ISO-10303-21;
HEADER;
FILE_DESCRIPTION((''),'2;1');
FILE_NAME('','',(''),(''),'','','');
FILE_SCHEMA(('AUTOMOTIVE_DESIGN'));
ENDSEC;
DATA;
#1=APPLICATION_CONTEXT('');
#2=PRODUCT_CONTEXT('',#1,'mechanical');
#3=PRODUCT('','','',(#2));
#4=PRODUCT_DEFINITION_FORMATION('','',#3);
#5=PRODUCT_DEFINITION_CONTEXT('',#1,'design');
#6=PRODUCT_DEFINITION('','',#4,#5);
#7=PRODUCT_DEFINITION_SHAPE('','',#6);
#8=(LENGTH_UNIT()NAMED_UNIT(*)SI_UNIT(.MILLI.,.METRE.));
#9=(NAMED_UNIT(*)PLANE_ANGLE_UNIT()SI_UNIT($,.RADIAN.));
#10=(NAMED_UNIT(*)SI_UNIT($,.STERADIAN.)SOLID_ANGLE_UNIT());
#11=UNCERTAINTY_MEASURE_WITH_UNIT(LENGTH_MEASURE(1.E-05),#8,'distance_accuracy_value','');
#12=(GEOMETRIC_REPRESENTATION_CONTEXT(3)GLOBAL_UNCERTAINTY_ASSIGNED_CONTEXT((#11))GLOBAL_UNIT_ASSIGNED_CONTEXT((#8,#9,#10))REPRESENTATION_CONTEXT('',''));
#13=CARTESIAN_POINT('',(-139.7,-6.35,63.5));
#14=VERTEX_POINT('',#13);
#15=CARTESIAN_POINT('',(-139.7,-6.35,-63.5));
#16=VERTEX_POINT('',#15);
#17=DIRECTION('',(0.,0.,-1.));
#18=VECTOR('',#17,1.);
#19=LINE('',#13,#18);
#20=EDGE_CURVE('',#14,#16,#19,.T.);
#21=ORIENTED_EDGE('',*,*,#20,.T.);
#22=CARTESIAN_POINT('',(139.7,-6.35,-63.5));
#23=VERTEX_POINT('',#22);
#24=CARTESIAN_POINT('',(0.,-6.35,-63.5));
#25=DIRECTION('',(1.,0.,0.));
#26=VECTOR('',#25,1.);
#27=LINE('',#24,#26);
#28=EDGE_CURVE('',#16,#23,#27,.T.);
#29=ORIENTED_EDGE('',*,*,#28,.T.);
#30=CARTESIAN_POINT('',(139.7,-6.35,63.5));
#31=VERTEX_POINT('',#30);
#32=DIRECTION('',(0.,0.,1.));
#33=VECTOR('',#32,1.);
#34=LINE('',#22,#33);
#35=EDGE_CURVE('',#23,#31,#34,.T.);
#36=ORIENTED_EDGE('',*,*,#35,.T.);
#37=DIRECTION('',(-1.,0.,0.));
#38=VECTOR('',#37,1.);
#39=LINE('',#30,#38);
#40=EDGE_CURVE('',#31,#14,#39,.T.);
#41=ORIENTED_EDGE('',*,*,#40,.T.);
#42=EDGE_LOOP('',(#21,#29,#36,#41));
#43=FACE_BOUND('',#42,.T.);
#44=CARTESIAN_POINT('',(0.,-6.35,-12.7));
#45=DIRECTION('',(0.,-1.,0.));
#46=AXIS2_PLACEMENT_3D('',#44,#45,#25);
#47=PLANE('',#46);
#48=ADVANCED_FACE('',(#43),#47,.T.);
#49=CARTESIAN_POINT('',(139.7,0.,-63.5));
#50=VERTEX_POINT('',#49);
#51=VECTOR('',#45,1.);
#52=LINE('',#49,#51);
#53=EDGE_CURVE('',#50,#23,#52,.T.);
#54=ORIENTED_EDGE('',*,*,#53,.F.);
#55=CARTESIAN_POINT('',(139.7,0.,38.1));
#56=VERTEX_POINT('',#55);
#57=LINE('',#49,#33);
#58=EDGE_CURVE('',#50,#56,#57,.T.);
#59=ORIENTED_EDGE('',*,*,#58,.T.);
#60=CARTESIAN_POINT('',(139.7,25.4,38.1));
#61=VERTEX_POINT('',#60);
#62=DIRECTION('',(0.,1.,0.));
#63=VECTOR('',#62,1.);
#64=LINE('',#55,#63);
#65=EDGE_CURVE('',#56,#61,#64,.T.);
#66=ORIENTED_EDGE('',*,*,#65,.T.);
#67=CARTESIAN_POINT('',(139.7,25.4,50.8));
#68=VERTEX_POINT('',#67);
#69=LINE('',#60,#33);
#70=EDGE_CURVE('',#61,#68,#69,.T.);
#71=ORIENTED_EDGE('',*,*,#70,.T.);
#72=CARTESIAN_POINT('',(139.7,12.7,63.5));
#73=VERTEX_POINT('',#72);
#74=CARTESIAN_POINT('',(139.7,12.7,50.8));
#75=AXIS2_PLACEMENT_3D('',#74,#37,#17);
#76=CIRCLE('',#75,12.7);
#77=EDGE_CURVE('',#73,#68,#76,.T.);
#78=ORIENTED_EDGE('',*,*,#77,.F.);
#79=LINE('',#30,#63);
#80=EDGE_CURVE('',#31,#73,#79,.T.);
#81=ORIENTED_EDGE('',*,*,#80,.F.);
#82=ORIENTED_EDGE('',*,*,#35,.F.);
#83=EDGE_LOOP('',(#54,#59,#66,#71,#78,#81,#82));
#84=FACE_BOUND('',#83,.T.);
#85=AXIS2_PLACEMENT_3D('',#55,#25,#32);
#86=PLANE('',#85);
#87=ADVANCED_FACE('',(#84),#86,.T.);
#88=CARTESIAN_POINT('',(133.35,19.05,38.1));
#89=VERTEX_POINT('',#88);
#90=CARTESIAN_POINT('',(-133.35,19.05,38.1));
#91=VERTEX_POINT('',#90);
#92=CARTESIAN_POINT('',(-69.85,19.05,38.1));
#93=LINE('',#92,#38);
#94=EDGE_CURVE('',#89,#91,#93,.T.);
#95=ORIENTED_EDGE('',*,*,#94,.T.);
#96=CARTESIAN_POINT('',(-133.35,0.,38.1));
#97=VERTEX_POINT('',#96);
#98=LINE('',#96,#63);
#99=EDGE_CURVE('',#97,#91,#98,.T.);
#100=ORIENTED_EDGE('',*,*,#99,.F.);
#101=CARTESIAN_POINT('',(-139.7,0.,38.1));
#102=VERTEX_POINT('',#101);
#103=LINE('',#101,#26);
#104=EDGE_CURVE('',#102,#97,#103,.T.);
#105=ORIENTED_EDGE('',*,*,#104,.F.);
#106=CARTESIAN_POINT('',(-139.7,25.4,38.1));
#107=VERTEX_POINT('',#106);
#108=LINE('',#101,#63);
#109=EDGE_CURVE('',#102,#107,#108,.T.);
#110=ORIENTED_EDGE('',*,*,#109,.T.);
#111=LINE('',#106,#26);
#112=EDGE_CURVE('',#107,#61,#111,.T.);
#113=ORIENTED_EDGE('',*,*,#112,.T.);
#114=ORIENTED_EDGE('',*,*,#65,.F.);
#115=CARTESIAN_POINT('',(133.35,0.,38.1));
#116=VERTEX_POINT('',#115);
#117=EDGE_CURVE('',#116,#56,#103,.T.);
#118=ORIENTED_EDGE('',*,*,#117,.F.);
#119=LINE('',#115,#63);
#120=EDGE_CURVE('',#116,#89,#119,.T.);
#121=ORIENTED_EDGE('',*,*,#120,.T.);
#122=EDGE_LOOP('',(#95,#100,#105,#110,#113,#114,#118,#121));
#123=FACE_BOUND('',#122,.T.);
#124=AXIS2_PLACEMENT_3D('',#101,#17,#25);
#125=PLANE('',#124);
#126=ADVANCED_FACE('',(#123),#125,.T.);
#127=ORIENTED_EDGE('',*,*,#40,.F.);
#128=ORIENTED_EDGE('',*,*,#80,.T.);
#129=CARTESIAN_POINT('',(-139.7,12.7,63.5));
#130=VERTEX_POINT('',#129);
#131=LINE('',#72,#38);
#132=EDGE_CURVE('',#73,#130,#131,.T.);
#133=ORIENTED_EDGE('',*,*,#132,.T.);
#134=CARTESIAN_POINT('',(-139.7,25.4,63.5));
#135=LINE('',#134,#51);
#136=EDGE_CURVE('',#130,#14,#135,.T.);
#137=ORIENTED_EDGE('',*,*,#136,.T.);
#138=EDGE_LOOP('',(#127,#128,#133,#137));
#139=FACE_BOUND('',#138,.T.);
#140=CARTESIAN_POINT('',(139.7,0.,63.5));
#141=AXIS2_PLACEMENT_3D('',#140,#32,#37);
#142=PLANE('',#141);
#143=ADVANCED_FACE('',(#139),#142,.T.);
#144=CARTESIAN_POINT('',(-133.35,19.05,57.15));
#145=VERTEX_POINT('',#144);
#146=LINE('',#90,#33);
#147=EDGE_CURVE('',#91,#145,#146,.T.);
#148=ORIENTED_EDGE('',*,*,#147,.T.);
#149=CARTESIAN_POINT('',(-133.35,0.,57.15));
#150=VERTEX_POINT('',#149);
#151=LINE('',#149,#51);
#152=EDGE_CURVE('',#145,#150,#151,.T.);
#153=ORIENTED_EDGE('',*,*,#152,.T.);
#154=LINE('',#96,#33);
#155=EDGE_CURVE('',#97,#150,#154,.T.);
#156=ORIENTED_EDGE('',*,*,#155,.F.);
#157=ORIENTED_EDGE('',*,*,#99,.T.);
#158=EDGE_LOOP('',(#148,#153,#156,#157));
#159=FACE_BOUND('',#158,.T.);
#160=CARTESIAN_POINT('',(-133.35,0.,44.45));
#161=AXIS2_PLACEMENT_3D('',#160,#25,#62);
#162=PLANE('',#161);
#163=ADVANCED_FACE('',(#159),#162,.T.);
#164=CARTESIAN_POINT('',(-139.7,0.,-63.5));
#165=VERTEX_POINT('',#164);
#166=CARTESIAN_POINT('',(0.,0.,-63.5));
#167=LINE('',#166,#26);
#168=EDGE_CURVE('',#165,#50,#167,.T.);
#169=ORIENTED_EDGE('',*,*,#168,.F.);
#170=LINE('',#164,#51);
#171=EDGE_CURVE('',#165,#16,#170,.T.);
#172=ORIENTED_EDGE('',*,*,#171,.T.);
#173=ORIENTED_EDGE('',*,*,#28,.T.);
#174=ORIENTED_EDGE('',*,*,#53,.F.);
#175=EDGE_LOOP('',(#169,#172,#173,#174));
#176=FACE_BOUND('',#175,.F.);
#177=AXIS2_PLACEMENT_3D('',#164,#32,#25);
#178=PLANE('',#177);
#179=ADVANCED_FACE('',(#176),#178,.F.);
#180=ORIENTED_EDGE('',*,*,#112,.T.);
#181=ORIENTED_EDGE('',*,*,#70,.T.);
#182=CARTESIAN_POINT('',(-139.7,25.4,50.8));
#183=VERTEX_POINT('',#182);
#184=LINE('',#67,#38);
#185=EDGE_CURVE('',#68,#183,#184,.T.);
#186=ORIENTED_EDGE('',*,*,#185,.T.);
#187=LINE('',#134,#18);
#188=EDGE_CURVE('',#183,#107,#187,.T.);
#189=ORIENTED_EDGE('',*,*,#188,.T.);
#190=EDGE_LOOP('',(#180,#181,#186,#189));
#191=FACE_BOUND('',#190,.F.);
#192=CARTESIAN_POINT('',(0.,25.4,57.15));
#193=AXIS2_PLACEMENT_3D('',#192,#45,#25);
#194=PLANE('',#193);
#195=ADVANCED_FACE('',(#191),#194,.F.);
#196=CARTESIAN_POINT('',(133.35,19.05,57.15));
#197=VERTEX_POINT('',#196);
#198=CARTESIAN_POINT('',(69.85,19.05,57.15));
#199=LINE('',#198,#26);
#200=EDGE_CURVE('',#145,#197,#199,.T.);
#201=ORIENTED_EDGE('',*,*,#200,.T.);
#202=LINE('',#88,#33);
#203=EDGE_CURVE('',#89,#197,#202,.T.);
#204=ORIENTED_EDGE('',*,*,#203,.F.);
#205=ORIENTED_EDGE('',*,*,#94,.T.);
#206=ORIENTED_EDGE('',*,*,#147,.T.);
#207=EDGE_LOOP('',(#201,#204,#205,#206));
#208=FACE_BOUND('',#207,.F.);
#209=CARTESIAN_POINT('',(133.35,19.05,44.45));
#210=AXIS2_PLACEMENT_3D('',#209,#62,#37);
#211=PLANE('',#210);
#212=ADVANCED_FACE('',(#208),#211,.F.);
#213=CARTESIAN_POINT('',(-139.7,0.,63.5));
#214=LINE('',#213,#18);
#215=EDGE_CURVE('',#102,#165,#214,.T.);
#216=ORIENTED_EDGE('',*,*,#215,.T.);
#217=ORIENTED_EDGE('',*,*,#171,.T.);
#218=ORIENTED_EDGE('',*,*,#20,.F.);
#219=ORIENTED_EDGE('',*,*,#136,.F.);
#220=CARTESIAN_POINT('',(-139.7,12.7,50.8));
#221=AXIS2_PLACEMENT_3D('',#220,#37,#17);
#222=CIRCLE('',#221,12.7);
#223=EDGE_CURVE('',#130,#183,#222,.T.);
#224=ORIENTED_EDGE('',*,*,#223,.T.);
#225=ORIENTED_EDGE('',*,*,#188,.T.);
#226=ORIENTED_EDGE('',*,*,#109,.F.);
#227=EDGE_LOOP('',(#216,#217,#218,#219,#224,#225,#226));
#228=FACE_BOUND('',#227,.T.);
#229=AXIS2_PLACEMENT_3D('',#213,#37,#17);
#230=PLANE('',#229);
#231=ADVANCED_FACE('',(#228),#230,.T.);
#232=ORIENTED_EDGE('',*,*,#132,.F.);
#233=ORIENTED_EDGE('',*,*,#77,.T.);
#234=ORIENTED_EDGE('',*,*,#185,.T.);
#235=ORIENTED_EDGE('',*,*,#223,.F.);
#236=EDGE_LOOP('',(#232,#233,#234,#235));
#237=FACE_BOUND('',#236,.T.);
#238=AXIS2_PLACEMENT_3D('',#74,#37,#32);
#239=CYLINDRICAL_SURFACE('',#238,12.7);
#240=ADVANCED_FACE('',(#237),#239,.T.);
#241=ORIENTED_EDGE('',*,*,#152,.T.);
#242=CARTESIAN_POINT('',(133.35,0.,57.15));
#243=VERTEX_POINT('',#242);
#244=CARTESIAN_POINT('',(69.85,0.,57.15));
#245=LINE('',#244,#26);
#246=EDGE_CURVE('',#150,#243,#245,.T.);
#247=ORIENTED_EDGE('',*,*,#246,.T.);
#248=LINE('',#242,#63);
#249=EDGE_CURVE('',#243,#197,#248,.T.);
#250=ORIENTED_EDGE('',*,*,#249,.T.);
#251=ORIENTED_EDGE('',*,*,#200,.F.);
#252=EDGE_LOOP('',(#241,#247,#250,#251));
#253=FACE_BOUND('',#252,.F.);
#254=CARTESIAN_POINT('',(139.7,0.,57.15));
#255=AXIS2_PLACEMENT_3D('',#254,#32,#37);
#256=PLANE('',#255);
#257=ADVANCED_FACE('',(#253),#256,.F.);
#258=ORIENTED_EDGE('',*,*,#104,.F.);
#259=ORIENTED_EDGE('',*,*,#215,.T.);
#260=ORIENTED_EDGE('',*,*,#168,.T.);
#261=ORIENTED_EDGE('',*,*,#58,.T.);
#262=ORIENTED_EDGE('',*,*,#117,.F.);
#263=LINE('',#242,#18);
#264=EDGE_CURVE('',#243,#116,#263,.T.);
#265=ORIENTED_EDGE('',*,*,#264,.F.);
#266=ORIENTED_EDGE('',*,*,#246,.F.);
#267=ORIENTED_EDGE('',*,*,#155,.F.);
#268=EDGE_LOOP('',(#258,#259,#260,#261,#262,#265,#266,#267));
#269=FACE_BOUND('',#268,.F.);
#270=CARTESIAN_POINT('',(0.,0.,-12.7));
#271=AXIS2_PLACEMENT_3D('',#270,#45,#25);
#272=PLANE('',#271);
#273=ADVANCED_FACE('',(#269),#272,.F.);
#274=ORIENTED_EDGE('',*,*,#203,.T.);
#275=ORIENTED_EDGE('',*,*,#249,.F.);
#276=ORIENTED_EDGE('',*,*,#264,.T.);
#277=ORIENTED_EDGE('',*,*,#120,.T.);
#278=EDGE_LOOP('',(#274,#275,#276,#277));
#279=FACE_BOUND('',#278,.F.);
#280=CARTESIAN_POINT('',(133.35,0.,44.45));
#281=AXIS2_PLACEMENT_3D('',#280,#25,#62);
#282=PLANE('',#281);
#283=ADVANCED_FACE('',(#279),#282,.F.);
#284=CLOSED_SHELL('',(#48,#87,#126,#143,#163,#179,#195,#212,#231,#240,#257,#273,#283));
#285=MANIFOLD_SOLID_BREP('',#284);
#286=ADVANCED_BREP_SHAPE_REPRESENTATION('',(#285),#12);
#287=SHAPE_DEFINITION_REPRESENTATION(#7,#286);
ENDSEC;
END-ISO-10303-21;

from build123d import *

# Parameters (mm, degrees)
F0_W     = 279.4
F0_H     = 101.6
F1_DEPTH = 6.35
F2_DEPTH = 25.4
F3_T     = -6.35
F4_R     = 12.7


# Not quite as in the source:
# - a shell that OpenCascade refuses in one call is made with other operations: the cavity is built on its own and cut out


with BuildPart() as f1:
    # F0 (on Front) → F1 (new body)
    with BuildSketch(Plane.XZ):
        with Locations((0, -12.7)):
            Rectangle(F0_W, F0_H)
        Polygon((-139.7, 38.1), (139.7, 38.1), (139.7, 50.8), (0, 50.8), (-139.7, 50.8), align=None)
        Polygon((0, 50.8), (139.7, 50.8), (139.7, 63.5), (-139.7, 63.5), (-139.7, 50.8), align=None)
    extrude(amount=F1_DEPTH)

    # F0 (on Front) → F2 (join)
    with BuildSketch(Plane.XZ):
        Polygon((0, 50.8), (139.7, 50.8), (139.7, 63.5), (-139.7, 63.5), (-139.7, 50.8), align=None)
        Polygon((-139.7, 38.1), (139.7, 38.1), (139.7, 50.8), (0, 50.8), (-139.7, 50.8), align=None)
    extrude(amount=-F2_DEPTH)

    # F3: a shell. OpenCascade refuses it in one call, so the cavity is built on its own and cut out:
    # the body offset inwards by the wall thickness, plus a prism from it out through each open face.
    f3_core = offset(f1.part, amount=F3_T, kind=Kind.INTERSECTION, mode=Mode.PRIVATE)
    f3_exits = [f3_core.faces().sort_by_distance(p)[0] for p in [
        (0, 9.525, 44.45),
    ]]
    add(f3_core, mode=Mode.SUBTRACT)
    extrude(f3_exits, amount=-F3_T, mode=Mode.SUBTRACT)

    # F4
    f4_edges = [f1.edges().sort_by_distance(p)[0] for p in [
        (0, 25.4, 63.5),
    ]]
    fillet(f4_edges, radius=F4_R)


solid = f1.part
